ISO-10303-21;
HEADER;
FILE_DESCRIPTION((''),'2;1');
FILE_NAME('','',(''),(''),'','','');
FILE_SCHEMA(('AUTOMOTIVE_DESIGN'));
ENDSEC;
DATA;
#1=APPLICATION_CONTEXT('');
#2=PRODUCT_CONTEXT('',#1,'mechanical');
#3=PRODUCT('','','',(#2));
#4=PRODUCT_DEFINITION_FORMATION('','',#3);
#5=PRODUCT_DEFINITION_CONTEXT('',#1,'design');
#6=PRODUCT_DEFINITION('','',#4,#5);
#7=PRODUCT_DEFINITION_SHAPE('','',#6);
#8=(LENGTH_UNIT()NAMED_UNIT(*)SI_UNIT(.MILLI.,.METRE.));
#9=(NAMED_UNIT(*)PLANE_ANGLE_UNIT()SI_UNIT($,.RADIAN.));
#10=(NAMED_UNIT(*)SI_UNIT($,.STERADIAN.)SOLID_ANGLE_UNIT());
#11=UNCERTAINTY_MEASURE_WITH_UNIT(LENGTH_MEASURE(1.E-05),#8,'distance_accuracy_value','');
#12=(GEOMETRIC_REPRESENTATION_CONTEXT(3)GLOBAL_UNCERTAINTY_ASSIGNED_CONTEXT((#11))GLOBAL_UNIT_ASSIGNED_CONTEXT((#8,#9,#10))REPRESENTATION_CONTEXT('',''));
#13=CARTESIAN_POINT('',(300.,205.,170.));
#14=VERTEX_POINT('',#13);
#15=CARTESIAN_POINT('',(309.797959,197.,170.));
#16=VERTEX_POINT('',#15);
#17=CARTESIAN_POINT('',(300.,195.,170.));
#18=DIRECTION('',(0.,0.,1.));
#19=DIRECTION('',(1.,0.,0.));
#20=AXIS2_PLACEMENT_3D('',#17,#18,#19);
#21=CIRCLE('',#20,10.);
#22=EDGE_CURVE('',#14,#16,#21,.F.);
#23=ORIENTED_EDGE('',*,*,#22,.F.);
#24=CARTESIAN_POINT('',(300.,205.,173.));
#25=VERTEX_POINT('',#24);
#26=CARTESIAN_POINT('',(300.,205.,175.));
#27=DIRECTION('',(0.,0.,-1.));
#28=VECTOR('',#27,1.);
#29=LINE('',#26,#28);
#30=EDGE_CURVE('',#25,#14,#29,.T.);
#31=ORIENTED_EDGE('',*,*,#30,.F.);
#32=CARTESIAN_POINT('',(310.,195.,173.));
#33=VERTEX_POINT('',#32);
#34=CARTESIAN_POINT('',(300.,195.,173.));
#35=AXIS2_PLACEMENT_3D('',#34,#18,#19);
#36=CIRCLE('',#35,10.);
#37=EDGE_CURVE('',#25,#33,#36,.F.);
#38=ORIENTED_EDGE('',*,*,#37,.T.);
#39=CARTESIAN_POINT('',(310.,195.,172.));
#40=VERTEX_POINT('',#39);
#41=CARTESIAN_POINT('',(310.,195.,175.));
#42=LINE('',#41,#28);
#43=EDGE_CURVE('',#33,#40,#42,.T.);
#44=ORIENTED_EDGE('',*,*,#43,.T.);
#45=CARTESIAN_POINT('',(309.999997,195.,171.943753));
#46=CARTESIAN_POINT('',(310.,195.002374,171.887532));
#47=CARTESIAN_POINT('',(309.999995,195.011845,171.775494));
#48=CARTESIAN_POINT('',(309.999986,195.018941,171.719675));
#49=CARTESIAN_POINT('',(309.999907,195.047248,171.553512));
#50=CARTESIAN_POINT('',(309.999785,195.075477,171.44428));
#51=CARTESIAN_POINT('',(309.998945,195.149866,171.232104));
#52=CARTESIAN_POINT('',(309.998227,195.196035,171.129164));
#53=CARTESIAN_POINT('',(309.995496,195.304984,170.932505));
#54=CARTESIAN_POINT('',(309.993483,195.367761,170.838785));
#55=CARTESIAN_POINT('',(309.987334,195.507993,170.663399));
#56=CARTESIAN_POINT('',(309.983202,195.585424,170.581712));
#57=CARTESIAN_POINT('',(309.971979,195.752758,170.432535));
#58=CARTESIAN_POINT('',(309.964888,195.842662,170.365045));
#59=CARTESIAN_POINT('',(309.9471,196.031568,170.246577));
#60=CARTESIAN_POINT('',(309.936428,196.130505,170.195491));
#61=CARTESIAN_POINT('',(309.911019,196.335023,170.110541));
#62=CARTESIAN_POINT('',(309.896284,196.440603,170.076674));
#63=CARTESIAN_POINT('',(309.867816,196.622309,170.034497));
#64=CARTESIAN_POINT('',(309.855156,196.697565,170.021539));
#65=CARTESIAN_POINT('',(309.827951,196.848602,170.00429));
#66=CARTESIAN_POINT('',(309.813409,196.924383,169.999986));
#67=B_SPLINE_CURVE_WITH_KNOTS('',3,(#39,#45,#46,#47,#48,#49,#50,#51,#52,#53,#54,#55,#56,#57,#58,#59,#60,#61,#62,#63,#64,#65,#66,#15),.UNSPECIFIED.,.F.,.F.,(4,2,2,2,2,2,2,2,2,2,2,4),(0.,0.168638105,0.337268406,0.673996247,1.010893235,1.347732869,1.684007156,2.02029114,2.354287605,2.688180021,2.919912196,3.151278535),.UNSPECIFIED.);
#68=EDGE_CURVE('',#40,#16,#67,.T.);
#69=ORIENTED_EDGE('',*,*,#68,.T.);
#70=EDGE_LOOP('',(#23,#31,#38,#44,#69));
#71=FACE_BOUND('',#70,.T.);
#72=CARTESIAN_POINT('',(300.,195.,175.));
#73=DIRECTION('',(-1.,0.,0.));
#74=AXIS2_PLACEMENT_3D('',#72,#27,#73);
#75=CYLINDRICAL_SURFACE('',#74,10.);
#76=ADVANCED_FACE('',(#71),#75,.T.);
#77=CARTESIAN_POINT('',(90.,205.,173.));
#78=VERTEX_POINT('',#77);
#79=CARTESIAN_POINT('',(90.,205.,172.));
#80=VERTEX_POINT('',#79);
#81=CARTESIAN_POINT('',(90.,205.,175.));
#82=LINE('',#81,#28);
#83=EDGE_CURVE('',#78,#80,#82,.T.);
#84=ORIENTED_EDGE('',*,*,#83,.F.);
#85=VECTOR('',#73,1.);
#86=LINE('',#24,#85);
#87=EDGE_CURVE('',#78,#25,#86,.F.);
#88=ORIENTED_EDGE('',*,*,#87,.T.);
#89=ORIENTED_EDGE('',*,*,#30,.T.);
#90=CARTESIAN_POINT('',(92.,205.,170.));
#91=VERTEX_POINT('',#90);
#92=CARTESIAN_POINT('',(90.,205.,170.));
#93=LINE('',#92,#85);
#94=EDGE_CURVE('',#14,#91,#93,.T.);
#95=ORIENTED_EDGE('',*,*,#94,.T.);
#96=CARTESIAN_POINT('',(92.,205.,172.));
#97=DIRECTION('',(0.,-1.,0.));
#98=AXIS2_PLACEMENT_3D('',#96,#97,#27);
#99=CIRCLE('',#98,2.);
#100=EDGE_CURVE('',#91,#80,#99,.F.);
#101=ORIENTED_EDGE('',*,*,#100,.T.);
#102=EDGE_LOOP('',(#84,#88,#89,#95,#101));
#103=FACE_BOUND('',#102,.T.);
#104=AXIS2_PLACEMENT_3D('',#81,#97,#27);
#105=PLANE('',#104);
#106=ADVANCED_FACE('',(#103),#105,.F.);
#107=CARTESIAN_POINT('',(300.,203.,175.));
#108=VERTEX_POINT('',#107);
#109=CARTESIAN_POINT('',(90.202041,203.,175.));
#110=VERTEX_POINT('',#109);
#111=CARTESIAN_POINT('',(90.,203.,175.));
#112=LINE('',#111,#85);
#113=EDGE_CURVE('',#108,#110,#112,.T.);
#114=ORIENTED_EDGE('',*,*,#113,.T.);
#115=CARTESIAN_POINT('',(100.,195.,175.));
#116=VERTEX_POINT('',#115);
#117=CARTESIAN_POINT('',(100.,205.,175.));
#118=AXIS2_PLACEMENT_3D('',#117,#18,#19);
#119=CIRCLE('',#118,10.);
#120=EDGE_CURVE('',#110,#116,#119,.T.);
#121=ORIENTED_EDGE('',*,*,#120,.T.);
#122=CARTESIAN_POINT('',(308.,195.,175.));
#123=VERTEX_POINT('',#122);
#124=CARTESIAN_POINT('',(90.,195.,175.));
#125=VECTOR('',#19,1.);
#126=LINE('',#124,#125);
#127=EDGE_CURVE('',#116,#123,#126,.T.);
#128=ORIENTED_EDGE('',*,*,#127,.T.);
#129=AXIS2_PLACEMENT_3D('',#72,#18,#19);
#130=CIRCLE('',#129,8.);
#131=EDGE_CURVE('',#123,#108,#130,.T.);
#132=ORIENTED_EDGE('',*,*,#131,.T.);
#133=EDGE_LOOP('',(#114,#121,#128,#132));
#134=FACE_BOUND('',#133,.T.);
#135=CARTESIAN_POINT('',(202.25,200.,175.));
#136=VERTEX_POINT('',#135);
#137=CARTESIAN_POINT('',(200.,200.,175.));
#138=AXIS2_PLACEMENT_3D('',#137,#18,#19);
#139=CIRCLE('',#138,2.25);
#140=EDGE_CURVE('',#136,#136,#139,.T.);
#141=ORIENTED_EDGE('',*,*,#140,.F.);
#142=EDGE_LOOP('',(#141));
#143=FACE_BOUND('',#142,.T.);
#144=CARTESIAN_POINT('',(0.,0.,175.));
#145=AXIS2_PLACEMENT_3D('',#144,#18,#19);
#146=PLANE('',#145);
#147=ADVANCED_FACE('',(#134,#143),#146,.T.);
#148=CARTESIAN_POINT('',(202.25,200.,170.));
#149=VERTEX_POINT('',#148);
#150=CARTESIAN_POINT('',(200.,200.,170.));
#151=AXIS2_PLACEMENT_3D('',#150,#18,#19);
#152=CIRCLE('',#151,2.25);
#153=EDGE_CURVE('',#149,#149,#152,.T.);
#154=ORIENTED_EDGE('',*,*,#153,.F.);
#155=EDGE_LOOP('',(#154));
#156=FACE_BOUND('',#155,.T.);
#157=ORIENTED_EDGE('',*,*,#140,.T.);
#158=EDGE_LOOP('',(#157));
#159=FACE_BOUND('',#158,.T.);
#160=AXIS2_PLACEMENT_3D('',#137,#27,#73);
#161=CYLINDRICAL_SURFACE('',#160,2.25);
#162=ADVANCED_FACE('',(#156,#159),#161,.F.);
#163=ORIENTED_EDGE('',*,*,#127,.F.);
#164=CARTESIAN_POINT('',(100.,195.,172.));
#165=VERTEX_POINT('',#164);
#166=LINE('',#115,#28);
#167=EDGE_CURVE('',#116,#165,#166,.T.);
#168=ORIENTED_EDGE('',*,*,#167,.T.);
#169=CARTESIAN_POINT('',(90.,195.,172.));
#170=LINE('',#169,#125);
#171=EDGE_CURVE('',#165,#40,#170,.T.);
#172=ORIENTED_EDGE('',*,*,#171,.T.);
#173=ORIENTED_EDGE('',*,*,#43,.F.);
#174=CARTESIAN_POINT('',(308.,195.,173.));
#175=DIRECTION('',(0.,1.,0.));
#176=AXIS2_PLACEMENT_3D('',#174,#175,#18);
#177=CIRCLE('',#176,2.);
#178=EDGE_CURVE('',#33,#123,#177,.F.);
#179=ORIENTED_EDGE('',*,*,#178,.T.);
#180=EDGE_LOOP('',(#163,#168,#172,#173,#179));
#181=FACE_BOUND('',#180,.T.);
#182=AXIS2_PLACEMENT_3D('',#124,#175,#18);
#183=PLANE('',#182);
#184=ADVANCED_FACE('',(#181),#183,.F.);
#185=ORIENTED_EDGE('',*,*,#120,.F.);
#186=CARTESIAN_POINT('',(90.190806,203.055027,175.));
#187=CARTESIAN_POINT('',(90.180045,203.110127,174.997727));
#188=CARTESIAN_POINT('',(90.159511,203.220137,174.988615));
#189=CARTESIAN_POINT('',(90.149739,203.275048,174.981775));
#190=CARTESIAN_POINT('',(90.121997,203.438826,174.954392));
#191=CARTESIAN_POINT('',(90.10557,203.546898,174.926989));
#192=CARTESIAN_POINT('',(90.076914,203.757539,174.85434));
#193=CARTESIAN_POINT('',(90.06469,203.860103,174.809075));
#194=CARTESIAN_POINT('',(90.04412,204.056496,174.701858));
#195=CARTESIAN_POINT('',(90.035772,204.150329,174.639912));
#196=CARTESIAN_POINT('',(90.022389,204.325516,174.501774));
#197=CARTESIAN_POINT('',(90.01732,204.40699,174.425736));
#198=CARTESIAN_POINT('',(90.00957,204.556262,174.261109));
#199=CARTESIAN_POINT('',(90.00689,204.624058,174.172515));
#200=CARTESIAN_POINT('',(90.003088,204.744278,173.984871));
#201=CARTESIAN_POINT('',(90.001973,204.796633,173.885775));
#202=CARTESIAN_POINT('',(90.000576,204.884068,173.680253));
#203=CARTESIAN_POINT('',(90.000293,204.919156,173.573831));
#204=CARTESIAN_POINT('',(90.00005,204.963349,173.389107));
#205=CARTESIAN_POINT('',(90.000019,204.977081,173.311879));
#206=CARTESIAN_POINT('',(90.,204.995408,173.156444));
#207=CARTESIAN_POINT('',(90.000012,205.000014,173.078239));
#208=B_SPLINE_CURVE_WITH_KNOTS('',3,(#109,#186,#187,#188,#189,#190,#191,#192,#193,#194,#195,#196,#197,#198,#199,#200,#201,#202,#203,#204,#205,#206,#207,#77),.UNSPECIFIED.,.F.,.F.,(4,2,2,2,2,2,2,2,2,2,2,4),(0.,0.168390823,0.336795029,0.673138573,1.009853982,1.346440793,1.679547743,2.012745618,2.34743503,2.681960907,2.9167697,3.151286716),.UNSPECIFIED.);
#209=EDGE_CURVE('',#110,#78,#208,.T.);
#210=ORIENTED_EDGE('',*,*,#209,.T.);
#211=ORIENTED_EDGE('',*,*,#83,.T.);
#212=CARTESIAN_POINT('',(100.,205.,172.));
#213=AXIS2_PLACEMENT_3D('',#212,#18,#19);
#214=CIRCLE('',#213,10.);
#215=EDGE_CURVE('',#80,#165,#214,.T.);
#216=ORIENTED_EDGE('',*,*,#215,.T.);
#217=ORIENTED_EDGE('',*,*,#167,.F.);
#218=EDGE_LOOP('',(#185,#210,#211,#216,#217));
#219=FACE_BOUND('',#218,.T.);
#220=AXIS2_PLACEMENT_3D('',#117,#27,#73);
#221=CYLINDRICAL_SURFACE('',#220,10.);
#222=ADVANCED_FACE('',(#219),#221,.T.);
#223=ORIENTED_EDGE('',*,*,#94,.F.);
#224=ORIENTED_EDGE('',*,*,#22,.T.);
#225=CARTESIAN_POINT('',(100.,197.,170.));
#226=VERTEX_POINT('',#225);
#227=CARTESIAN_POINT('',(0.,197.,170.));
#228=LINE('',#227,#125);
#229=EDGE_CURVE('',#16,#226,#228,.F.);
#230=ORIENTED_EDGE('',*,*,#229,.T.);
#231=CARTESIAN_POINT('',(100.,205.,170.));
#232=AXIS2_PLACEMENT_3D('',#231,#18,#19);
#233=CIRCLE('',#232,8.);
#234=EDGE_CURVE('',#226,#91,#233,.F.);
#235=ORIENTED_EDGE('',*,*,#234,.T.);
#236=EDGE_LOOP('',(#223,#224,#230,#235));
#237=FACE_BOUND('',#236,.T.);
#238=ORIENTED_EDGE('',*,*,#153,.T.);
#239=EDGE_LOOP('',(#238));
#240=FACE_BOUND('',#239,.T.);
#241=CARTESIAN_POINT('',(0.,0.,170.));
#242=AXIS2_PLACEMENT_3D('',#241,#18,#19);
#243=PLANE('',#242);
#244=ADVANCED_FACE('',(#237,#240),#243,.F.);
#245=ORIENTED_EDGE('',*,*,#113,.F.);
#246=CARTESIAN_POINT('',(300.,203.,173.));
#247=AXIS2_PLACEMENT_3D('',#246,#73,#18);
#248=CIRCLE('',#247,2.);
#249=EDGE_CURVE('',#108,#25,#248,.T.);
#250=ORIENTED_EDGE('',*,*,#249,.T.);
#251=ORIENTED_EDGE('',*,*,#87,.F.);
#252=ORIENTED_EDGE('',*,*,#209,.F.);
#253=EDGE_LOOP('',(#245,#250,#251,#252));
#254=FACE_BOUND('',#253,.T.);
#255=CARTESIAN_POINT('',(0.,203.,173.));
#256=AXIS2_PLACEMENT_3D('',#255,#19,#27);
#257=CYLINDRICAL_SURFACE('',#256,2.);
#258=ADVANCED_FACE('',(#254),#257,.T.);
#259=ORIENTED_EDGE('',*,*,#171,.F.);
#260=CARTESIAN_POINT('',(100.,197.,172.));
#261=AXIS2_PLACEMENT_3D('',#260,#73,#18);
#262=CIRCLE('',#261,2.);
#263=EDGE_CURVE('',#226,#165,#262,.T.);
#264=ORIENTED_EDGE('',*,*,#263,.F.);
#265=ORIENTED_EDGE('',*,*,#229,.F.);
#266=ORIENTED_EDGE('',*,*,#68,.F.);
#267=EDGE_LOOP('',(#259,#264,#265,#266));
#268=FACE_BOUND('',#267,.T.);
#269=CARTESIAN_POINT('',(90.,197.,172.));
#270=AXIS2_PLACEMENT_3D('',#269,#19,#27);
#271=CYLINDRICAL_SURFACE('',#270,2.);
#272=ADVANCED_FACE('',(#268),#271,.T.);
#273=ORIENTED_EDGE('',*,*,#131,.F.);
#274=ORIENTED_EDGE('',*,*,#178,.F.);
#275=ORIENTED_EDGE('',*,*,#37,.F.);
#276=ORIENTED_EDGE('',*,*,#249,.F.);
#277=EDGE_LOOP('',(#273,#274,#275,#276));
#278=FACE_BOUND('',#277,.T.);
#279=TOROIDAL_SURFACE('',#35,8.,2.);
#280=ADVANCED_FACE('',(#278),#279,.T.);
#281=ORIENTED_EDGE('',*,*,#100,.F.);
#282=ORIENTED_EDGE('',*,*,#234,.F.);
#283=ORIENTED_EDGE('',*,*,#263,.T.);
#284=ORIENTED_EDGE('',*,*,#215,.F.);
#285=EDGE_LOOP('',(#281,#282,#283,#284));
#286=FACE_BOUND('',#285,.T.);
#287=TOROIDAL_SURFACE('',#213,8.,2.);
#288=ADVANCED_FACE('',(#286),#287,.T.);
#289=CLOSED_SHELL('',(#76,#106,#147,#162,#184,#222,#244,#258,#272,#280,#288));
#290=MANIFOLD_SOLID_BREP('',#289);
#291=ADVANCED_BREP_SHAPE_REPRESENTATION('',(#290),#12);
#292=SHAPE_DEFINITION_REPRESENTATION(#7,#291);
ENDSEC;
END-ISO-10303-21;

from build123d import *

# Parameters (mm, degrees)
SKETCH28_W           = 220
SKETCH28_H           = 10
SKETCH28_R           = 2.25
BOSS_EXTRUDE11_DEPTH = 5
VARFILLET1_R         = 10
VARFILLET2_R         = 10
VARFILLET3_R         = 2
VARFILLET4_R         = 2


with BuildPart() as part:
    # Sketch28 → Boss-Extrude11 (new body)
    with BuildSketch(Plane.XY.offset(170)):
        with Locations((200, 200)):
            Rectangle(SKETCH28_W, SKETCH28_H)
        with Locations((200, 200)):
            Circle(SKETCH28_R, mode=Mode.SUBTRACT)
    extrude(amount=BOSS_EXTRUDE11_DEPTH)

    # VarFillet1
    varfillet1_edges = [part.edges().sort_by_distance(p)[0] for p in [
        (310, 205, 172.5),
    ]]
    fillet(varfillet1_edges, radius=VARFILLET1_R - 0.0001)  # a hair under: the kernel refuses the full size

    # VarFillet2
    varfillet2_edges = [part.edges().sort_by_distance(p)[0] for p in [
        (90, 195, 172.5),
    ]]
    fillet(varfillet2_edges, radius=VARFILLET2_R - 0.0001)  # a hair under: the kernel refuses the full size

    # VarFillet3
    varfillet3_edges = [part.edges().sort_by_distance(p)[0] for p in [
        (307.071097101, 202.071097101, 175),
    ]]
    fillet(varfillet3_edges, radius=VARFILLET3_R)

    # VarFillet4
    varfillet4_edges = [part.edges().sort_by_distance(p)[0] for p in [
        (92.928902899, 197.928902899, 170),
    ]]
    fillet(varfillet4_edges, radius=VARFILLET4_R)


solid = part.part
